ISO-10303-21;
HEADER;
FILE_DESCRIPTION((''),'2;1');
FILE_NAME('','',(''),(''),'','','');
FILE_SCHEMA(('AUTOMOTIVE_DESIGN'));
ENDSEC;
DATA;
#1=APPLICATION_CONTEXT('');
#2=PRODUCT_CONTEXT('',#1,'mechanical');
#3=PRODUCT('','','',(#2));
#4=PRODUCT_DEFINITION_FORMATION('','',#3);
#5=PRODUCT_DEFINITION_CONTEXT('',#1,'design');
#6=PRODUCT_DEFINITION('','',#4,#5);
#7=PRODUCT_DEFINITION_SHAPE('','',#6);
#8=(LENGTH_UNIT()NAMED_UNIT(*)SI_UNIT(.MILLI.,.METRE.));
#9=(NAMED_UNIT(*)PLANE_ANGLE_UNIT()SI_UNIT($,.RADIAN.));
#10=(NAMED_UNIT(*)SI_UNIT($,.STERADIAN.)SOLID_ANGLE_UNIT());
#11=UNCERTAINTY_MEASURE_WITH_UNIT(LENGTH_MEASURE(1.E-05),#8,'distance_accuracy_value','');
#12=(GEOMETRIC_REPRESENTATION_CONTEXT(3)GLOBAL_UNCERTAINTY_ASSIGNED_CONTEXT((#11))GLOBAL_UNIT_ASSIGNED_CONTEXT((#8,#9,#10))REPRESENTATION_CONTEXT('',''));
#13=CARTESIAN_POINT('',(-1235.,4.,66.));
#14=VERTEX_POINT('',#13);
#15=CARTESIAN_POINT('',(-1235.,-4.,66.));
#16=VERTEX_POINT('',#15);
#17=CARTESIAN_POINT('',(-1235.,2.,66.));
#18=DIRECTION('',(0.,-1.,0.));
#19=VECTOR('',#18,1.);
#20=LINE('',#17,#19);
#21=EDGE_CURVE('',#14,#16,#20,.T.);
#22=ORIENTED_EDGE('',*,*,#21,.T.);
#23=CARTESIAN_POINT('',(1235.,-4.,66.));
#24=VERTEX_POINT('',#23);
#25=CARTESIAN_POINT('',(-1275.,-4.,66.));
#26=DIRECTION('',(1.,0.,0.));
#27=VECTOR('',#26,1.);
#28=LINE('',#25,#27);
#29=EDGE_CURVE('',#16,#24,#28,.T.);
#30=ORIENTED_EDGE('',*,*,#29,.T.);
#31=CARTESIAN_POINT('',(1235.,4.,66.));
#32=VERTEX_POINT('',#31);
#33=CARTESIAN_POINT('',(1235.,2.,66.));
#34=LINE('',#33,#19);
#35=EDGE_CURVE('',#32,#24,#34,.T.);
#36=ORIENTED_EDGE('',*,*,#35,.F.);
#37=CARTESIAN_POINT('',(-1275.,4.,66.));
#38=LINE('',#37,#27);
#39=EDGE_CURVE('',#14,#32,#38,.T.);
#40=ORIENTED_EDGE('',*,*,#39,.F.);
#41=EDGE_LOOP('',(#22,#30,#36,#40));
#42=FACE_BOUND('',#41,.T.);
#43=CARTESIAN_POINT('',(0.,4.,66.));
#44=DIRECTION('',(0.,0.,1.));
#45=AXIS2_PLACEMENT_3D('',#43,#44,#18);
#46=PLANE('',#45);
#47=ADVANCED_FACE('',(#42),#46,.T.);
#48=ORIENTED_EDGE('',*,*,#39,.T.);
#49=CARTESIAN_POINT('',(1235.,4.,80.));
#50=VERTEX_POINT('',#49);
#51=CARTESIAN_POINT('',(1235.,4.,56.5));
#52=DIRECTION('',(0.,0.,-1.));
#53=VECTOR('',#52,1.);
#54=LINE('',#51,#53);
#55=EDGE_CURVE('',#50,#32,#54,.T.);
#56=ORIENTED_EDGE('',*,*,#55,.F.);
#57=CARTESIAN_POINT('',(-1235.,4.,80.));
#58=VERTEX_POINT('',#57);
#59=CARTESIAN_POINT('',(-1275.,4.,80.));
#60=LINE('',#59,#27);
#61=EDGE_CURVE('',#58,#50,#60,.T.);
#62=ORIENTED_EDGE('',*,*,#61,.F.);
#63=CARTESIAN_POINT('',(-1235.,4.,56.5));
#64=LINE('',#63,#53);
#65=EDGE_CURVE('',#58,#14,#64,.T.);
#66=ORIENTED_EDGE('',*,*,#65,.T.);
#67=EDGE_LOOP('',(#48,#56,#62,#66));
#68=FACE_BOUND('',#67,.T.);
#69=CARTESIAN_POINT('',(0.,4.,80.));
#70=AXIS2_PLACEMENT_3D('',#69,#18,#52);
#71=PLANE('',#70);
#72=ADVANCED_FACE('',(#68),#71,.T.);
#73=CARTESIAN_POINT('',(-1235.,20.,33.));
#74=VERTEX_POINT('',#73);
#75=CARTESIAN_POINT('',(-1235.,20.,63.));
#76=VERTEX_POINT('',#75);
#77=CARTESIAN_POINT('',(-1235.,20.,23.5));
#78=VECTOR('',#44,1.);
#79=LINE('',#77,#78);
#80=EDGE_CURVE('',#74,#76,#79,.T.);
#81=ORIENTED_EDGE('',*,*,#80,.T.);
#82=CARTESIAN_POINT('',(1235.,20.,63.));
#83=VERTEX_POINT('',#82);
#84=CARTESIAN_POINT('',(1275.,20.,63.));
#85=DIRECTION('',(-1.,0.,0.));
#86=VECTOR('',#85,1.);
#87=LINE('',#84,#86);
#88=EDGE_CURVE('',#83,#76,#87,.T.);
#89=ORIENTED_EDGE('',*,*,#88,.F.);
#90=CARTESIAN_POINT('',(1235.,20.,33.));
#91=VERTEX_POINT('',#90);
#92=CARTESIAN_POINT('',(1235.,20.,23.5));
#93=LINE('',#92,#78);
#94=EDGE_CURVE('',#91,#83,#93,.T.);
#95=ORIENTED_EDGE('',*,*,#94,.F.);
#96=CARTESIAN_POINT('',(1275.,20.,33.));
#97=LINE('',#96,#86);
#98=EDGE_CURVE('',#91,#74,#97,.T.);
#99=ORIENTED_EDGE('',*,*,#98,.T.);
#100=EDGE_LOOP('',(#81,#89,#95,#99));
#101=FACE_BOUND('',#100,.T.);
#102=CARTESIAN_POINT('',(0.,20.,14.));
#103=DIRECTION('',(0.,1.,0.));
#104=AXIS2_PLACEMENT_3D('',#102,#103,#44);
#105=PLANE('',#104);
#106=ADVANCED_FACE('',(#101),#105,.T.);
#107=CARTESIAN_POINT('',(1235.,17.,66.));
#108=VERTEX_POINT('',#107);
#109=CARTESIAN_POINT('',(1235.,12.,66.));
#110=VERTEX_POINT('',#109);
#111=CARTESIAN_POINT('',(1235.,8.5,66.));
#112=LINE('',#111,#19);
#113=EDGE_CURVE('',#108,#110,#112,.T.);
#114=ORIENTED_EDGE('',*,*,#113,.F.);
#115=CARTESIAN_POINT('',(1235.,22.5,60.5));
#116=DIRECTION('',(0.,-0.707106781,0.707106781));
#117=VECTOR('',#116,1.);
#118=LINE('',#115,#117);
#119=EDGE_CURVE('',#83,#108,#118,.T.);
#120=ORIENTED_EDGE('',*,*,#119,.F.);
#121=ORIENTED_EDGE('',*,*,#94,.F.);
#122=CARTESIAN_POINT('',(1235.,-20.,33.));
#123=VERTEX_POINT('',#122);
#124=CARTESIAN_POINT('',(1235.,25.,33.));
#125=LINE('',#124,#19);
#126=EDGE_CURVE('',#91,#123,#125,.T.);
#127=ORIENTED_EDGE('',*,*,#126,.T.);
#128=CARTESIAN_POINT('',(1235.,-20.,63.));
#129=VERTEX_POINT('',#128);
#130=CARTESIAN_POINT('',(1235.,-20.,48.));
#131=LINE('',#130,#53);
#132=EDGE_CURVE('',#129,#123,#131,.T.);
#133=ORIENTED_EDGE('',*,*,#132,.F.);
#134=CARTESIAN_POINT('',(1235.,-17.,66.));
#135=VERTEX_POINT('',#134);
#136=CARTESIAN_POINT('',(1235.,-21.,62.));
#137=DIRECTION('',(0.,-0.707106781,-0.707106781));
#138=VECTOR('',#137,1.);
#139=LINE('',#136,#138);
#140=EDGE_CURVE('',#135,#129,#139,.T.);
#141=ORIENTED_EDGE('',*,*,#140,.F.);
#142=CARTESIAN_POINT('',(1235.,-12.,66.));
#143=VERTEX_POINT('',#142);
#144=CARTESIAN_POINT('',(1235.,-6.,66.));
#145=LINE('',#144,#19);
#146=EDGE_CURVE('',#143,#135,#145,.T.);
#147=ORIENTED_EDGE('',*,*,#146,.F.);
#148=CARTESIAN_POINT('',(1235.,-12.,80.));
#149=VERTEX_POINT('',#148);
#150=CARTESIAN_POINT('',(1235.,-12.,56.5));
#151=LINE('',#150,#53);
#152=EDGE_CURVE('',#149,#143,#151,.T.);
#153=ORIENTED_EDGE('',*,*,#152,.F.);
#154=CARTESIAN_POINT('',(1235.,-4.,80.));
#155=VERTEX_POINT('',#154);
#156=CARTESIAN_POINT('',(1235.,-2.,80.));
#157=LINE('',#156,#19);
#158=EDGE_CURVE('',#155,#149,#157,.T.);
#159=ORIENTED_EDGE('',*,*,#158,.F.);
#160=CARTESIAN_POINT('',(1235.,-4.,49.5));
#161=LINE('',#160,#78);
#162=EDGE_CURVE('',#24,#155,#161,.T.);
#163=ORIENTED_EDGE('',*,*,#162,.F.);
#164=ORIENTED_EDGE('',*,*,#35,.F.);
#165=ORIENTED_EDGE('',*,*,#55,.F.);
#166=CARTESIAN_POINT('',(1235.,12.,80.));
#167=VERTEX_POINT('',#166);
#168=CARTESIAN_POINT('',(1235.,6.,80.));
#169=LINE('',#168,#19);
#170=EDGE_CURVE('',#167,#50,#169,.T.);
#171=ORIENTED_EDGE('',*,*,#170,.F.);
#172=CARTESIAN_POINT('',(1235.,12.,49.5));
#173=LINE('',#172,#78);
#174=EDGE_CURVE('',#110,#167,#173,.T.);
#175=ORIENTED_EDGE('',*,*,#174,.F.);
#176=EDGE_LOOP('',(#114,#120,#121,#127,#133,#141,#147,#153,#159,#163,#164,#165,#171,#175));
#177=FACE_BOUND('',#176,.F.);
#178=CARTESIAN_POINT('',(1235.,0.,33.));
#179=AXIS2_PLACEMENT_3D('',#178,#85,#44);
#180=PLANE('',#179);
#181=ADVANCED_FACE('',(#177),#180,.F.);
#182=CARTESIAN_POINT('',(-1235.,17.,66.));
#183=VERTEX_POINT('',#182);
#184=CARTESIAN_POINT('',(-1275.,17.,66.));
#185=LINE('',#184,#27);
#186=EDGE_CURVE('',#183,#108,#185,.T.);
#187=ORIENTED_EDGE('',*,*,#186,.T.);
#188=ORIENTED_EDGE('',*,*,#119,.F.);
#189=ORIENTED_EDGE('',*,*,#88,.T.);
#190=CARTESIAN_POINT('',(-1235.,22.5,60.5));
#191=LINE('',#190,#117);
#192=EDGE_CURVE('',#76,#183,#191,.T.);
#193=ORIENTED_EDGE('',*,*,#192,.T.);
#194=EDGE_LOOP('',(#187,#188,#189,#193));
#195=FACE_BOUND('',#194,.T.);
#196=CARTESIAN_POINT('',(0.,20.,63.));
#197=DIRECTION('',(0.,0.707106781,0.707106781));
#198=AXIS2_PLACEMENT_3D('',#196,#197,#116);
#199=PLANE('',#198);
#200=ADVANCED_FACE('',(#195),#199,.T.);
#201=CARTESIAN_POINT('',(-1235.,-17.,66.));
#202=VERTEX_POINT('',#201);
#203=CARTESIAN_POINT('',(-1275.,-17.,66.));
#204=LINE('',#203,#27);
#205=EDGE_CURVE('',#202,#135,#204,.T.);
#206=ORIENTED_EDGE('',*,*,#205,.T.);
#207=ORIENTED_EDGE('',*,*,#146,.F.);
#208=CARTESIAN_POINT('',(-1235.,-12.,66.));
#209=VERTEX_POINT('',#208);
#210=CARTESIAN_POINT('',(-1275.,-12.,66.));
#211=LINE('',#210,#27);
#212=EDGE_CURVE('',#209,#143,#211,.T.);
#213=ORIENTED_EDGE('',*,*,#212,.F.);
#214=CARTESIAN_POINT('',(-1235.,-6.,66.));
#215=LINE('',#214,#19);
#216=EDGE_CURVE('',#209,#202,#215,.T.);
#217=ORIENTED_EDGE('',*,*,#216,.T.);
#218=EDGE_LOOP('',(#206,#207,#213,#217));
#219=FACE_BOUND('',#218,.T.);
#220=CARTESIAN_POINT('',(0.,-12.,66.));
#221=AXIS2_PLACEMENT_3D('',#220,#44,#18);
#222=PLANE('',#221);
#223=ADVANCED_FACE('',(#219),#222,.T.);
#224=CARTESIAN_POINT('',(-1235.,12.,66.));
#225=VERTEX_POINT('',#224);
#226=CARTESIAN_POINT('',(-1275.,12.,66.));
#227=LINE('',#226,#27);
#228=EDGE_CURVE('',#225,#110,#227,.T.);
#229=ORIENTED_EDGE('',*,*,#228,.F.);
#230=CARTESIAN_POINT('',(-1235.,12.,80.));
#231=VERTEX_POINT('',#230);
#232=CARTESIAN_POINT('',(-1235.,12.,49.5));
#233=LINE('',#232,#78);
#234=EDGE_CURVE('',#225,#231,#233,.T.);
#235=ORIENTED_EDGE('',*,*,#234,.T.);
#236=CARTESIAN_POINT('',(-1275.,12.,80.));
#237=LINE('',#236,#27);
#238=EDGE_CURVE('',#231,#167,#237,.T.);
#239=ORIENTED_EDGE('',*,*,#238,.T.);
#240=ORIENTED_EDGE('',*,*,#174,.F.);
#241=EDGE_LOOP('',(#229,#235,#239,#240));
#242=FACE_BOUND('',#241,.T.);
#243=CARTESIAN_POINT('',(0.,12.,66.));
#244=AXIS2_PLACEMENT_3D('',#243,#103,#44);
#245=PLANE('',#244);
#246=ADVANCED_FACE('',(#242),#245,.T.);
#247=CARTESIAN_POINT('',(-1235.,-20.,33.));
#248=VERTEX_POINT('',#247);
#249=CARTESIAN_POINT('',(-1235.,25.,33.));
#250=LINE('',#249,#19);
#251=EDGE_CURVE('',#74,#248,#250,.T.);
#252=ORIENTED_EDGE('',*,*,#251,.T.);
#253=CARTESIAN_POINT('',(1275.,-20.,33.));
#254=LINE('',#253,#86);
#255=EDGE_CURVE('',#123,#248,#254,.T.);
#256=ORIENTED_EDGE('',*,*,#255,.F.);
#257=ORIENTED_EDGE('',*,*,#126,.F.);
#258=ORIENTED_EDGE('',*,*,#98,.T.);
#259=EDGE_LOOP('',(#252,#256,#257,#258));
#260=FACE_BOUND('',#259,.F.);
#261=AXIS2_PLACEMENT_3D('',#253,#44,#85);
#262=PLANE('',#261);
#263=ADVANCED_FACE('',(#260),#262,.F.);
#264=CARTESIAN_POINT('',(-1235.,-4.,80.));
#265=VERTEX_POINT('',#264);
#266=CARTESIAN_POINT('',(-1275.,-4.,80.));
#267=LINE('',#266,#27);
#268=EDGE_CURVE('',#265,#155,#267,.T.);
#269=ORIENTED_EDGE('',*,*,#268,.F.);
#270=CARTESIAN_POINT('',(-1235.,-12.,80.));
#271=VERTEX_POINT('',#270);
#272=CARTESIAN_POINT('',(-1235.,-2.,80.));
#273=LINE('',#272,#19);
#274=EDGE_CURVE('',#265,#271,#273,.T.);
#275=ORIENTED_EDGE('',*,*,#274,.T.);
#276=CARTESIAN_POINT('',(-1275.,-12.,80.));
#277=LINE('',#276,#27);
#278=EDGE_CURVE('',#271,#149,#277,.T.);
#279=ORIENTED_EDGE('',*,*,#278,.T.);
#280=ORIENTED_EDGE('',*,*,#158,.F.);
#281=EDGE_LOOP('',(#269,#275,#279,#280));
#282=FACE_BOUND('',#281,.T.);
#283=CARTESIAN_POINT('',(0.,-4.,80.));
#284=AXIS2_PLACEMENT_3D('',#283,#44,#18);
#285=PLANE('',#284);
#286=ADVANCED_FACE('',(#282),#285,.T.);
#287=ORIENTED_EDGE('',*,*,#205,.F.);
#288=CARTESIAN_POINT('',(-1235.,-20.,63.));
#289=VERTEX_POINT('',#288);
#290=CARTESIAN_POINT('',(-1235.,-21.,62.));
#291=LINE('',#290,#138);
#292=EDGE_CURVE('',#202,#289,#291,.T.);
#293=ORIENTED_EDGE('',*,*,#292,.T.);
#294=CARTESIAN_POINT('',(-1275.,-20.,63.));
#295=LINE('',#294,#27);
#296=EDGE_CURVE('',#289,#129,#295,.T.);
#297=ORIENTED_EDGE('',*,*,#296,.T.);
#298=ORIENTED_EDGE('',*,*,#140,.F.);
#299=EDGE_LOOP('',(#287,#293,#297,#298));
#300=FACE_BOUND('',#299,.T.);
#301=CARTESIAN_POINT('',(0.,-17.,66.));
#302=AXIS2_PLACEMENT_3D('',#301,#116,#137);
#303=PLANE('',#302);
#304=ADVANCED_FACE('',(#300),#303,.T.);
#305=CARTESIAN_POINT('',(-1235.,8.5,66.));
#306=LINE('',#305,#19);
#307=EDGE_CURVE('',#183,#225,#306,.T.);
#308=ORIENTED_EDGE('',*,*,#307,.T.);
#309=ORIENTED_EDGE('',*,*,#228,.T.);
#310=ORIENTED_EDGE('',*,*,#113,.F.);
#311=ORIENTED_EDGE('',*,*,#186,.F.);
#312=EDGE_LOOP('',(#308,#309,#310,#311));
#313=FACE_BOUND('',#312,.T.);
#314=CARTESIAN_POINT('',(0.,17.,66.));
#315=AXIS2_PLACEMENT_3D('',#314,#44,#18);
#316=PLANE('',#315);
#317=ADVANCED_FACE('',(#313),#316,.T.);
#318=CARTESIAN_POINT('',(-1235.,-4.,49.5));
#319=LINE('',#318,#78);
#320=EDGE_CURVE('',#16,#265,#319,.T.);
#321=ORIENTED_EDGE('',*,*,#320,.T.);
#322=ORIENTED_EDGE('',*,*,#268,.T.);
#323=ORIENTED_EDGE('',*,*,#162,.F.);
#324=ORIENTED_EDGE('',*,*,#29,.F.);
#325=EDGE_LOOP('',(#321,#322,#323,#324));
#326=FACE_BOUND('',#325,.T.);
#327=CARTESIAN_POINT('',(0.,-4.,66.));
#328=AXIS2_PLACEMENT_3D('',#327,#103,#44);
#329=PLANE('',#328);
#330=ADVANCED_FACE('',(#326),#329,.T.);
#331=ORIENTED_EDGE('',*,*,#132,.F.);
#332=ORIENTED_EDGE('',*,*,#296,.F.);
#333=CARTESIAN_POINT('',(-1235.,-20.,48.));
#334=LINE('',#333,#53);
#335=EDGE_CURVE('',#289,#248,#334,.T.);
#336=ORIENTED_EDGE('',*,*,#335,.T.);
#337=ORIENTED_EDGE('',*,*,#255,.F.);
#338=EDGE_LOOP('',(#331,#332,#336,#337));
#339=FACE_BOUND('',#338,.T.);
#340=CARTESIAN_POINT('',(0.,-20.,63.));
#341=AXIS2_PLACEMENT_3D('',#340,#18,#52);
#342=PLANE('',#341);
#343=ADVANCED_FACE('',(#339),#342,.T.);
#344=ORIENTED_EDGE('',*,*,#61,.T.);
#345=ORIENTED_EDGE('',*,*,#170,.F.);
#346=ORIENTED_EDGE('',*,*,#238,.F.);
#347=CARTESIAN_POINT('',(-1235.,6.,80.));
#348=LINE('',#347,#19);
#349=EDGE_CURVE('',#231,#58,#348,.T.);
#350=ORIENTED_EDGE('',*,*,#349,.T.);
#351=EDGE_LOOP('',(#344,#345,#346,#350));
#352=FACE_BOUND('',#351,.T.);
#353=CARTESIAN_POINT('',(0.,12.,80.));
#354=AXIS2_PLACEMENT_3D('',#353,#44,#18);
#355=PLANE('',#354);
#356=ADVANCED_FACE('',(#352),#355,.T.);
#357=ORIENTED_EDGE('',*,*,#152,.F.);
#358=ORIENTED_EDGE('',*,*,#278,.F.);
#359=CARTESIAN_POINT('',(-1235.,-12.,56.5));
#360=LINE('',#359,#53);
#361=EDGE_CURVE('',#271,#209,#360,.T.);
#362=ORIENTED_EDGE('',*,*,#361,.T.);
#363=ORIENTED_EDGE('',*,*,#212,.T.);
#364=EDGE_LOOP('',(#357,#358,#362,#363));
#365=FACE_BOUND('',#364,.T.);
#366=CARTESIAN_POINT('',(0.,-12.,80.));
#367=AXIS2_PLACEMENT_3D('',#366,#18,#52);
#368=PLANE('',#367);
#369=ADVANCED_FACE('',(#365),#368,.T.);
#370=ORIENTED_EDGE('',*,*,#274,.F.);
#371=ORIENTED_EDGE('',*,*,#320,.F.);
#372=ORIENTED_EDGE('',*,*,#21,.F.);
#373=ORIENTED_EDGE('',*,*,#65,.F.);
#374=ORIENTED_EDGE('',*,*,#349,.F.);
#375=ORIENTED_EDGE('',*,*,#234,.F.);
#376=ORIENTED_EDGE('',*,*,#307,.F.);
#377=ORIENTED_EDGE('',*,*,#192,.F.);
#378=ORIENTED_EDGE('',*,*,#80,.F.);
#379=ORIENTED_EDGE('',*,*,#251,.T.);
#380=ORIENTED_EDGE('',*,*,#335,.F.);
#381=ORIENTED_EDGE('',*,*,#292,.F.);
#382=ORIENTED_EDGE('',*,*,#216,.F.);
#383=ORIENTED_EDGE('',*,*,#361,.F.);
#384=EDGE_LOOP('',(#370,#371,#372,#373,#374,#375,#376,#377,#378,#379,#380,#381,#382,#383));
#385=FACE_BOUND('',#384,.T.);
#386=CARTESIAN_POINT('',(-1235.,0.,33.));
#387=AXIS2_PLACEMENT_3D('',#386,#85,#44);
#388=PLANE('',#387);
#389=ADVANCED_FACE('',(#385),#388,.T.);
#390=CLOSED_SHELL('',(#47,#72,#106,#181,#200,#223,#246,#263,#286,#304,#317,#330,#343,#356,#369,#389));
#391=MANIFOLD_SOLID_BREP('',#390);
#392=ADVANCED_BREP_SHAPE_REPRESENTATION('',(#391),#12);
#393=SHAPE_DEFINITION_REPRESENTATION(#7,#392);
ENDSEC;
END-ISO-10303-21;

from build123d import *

# Parameters (mm, degrees)
F1_W     = 40
F1_H     = 19
F3_DEPTH = 1275
F2_W     = 80
F2_H     = 100
F4_DEPTH = 25
F6_DEPTH = 40


with BuildPart() as f3:
    # F1 (on Right) → F3 (new body, symmetric)
    with BuildSketch(Plane.YZ):
        Polygon((20, 33), (20, 63), (17, 66), (12, 66), (12, 80), (4, 80), (4, 66), (-4, 66), (-4, 80), (-12, 80), (-12, 66), (-17, 66), (-20, 63), (-20, 33), align=None)
        with Locations((0, 23.5)):
            Rectangle(F1_W, F1_H)
    extrude(amount=F3_DEPTH, both=True)

    # F2 (on Front) → F4 (cut, symmetric)
    with BuildSketch(Plane.XZ):
        with Locations((-1275, 83)):
            Rectangle(F2_W, F2_H)
        with Locations((-1275, -83)):
            Rectangle(F2_W, F2_H)
        with Locations((1275, 83)):
            Rectangle(F2_W, F2_H)
        with Locations((1275, -83)):
            Rectangle(F2_W, F2_H)
    extrude(amount=F4_DEPTH, both=True, mode=Mode.SUBTRACT)

    # F5 (on face) → F6 (cut, through all)
    with BuildSketch(Plane.XZ.offset(20)):
        Polygon((-1235, 33), (-1275, 33), (-1275, 14), (1275, 14), (1275, 33), (1235, 33), align=None)
    extrude(amount=-F6_DEPTH, mode=Mode.SUBTRACT)


solid = f3.part
